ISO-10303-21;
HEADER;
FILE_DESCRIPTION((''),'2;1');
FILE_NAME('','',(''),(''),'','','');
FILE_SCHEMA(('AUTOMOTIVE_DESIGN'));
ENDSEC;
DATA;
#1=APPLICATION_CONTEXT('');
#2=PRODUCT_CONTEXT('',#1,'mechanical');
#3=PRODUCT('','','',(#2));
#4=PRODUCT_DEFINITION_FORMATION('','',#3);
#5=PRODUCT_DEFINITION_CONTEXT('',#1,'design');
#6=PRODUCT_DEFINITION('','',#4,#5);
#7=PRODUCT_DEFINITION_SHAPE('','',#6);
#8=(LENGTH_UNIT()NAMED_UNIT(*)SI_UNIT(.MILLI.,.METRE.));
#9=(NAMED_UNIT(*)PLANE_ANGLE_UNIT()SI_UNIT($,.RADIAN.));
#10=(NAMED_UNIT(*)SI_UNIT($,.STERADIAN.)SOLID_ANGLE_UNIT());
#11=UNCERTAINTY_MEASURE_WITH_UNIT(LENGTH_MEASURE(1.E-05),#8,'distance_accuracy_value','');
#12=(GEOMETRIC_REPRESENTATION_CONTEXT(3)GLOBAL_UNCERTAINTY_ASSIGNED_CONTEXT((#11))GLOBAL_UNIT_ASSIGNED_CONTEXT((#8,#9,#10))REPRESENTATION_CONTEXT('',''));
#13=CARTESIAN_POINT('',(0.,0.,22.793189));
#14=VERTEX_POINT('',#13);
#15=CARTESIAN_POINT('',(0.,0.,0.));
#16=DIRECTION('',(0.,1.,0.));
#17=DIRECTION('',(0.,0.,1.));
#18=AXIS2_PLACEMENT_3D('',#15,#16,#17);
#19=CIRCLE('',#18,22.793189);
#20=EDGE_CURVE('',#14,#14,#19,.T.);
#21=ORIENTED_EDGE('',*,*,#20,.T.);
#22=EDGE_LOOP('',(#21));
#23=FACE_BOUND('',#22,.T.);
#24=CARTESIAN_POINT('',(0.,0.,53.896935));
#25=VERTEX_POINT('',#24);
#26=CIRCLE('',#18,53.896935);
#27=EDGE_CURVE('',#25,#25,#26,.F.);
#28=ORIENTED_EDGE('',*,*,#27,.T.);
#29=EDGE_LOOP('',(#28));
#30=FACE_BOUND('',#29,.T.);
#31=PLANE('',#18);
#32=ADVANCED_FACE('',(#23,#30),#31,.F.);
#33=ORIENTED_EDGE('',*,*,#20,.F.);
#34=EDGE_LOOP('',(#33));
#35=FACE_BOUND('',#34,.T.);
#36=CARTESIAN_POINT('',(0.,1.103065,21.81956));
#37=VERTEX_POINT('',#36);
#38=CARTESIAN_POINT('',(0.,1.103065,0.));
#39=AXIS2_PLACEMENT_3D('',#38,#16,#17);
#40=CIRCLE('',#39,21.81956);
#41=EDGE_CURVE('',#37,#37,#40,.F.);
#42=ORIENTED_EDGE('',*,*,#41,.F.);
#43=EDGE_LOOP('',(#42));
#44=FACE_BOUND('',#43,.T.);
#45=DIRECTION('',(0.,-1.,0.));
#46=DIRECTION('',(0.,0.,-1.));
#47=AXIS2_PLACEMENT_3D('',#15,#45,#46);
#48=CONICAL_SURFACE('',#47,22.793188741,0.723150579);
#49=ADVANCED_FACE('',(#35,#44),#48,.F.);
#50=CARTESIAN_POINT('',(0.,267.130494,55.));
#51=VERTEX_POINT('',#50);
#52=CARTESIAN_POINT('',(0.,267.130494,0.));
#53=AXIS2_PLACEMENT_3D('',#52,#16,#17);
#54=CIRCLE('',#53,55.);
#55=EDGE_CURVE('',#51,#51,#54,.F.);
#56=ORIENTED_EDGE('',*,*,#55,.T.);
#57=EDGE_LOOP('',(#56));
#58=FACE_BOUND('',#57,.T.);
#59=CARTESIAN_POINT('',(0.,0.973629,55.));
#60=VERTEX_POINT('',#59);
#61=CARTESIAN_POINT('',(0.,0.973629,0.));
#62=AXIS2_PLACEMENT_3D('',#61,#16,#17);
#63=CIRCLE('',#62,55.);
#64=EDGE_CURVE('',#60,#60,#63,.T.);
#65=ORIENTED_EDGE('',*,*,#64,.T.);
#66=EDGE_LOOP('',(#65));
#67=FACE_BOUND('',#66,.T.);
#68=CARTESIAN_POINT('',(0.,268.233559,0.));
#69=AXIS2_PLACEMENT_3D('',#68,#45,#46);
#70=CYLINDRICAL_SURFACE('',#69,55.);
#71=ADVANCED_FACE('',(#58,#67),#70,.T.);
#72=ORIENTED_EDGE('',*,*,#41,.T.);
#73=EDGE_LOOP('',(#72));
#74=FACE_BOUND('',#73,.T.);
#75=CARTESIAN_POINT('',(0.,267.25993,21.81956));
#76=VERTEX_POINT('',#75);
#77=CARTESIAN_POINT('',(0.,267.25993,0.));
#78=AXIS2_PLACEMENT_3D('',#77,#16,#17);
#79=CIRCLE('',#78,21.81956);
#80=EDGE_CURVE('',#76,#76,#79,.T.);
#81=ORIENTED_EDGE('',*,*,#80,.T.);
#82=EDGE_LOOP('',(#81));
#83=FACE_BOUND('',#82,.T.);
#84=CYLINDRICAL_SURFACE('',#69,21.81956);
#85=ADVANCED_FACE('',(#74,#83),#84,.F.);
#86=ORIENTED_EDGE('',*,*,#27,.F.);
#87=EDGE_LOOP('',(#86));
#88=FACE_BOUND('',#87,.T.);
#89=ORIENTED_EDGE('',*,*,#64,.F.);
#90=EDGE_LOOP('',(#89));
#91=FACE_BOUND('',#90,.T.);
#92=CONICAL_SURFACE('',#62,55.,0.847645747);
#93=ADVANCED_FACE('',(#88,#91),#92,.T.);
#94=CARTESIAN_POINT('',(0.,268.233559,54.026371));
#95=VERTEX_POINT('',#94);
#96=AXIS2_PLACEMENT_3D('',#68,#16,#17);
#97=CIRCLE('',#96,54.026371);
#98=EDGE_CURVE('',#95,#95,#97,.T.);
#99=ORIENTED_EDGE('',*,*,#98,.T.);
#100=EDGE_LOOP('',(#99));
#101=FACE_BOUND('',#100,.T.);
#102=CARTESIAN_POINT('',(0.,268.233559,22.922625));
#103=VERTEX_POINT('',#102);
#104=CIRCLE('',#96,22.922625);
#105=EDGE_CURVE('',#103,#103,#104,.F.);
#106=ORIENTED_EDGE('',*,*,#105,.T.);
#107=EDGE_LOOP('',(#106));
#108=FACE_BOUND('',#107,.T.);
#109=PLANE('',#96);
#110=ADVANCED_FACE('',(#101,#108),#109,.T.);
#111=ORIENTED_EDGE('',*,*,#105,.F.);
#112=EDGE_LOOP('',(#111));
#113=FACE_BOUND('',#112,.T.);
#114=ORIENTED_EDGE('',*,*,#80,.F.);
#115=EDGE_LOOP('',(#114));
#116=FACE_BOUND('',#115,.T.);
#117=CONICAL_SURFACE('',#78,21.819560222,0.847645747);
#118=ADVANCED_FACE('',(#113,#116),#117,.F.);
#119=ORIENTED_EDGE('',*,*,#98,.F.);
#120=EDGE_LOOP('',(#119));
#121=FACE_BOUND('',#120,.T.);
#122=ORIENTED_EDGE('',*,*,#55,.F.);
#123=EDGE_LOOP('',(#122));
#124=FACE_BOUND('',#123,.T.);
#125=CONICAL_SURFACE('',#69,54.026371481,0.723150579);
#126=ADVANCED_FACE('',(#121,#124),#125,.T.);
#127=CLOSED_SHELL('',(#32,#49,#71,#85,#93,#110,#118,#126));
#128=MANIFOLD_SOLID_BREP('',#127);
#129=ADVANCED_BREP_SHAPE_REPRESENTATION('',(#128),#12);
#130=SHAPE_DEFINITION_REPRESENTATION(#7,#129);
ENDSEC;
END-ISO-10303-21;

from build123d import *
from OCP.BRepFilletAPI import BRepFilletAPI_MakeChamfer

# Parameters (mm, degrees)
SKETCH1_R           = 55
BOSS_EXTRUDE1_DEPTH = 268.233558865
SKETCH2_R           = 21.819560222
CUT_EXTRUDE1_DEPTH  = 280.283444016
CHAMFER1_SIZE       = 1.103064888
CHAMFER1_SIZE2      = 0.973628519


with BuildPart() as part:
    # Sketch1 → Boss-Extrude1 (new body)
    with BuildSketch(Plane(origin=(0, 0, 0), x_dir=(1, 0, 0), z_dir=(0, 1, 0))):
        Circle(SKETCH1_R)
    extrude(amount=BOSS_EXTRUDE1_DEPTH)

    # Sketch2 → Cut-Extrude1 (cut, through all)
    with BuildSketch(Plane(origin=(0, 0, 0), x_dir=(1, 0, 0), z_dir=(0, 1, 0))):
        Circle(SKETCH2_R)
    extrude(amount=CUT_EXTRUDE1_DEPTH, mode=Mode.SUBTRACT)

    # Chamfer1: one chamfer whose edges measure the first distance from different faces: ONE call of the kernel's chamfer builder (chamfer() names one face for all edges)
    chamfer1_edges_1 = [part.edges().sort_by_distance(p)[0] for p in [
        (-21.819560222, 268.233558865, 0),
    ]]
    chamfer1_side_1 = [part.faces().sort_by_distance(p)[0] for p in [
        (-53.444365081, 268.233558865, 0),
    ]]
    chamfer1_edges_2 = [part.edges().sort_by_distance(p)[0] for p in [
        (-21.819560222, 0, 0),
    ]]
    chamfer1_side_2 = [part.faces().sort_by_distance(p)[0] for p in [
        (-21.819560222, 134.116779433, 0),
    ]]
    chamfer1_edges_3 = [part.edges().sort_by_distance(p)[0] for p in [
        (-55, 0, 0),
    ]]
    chamfer1_side_3 = [part.faces().sort_by_distance(p)[0] for p in [
        (-53.444365081, 0, 0),
    ]]
    chamfer1_edges_4 = [part.edges().sort_by_distance(p)[0] for p in [
        (-55, 268.233558865, 0),
    ]]
    chamfer1_side_4 = [part.faces().sort_by_distance(p)[0] for p in [
        (-55, 134.116779433, 0),
    ]]
    chamfer1 = BRepFilletAPI_MakeChamfer(part.part.solid().wrapped)
    for e in chamfer1_edges_1:
        chamfer1.Add(CHAMFER1_SIZE, CHAMFER1_SIZE2, e.wrapped, chamfer1_side_1[0].wrapped)  # the first distance lies on this face
    for e in chamfer1_edges_2:
        chamfer1.Add(CHAMFER1_SIZE, CHAMFER1_SIZE2, e.wrapped, chamfer1_side_2[0].wrapped)  # the first distance lies on this face
    for e in chamfer1_edges_3:
        chamfer1.Add(CHAMFER1_SIZE, CHAMFER1_SIZE2, e.wrapped, chamfer1_side_3[0].wrapped)  # the first distance lies on this face
    for e in chamfer1_edges_4:
        chamfer1.Add(CHAMFER1_SIZE, CHAMFER1_SIZE2, e.wrapped, chamfer1_side_4[0].wrapped)  # the first distance lies on this face
    add(Compound.cast(chamfer1.Shape()), mode=Mode.REPLACE)


solid = part.part
